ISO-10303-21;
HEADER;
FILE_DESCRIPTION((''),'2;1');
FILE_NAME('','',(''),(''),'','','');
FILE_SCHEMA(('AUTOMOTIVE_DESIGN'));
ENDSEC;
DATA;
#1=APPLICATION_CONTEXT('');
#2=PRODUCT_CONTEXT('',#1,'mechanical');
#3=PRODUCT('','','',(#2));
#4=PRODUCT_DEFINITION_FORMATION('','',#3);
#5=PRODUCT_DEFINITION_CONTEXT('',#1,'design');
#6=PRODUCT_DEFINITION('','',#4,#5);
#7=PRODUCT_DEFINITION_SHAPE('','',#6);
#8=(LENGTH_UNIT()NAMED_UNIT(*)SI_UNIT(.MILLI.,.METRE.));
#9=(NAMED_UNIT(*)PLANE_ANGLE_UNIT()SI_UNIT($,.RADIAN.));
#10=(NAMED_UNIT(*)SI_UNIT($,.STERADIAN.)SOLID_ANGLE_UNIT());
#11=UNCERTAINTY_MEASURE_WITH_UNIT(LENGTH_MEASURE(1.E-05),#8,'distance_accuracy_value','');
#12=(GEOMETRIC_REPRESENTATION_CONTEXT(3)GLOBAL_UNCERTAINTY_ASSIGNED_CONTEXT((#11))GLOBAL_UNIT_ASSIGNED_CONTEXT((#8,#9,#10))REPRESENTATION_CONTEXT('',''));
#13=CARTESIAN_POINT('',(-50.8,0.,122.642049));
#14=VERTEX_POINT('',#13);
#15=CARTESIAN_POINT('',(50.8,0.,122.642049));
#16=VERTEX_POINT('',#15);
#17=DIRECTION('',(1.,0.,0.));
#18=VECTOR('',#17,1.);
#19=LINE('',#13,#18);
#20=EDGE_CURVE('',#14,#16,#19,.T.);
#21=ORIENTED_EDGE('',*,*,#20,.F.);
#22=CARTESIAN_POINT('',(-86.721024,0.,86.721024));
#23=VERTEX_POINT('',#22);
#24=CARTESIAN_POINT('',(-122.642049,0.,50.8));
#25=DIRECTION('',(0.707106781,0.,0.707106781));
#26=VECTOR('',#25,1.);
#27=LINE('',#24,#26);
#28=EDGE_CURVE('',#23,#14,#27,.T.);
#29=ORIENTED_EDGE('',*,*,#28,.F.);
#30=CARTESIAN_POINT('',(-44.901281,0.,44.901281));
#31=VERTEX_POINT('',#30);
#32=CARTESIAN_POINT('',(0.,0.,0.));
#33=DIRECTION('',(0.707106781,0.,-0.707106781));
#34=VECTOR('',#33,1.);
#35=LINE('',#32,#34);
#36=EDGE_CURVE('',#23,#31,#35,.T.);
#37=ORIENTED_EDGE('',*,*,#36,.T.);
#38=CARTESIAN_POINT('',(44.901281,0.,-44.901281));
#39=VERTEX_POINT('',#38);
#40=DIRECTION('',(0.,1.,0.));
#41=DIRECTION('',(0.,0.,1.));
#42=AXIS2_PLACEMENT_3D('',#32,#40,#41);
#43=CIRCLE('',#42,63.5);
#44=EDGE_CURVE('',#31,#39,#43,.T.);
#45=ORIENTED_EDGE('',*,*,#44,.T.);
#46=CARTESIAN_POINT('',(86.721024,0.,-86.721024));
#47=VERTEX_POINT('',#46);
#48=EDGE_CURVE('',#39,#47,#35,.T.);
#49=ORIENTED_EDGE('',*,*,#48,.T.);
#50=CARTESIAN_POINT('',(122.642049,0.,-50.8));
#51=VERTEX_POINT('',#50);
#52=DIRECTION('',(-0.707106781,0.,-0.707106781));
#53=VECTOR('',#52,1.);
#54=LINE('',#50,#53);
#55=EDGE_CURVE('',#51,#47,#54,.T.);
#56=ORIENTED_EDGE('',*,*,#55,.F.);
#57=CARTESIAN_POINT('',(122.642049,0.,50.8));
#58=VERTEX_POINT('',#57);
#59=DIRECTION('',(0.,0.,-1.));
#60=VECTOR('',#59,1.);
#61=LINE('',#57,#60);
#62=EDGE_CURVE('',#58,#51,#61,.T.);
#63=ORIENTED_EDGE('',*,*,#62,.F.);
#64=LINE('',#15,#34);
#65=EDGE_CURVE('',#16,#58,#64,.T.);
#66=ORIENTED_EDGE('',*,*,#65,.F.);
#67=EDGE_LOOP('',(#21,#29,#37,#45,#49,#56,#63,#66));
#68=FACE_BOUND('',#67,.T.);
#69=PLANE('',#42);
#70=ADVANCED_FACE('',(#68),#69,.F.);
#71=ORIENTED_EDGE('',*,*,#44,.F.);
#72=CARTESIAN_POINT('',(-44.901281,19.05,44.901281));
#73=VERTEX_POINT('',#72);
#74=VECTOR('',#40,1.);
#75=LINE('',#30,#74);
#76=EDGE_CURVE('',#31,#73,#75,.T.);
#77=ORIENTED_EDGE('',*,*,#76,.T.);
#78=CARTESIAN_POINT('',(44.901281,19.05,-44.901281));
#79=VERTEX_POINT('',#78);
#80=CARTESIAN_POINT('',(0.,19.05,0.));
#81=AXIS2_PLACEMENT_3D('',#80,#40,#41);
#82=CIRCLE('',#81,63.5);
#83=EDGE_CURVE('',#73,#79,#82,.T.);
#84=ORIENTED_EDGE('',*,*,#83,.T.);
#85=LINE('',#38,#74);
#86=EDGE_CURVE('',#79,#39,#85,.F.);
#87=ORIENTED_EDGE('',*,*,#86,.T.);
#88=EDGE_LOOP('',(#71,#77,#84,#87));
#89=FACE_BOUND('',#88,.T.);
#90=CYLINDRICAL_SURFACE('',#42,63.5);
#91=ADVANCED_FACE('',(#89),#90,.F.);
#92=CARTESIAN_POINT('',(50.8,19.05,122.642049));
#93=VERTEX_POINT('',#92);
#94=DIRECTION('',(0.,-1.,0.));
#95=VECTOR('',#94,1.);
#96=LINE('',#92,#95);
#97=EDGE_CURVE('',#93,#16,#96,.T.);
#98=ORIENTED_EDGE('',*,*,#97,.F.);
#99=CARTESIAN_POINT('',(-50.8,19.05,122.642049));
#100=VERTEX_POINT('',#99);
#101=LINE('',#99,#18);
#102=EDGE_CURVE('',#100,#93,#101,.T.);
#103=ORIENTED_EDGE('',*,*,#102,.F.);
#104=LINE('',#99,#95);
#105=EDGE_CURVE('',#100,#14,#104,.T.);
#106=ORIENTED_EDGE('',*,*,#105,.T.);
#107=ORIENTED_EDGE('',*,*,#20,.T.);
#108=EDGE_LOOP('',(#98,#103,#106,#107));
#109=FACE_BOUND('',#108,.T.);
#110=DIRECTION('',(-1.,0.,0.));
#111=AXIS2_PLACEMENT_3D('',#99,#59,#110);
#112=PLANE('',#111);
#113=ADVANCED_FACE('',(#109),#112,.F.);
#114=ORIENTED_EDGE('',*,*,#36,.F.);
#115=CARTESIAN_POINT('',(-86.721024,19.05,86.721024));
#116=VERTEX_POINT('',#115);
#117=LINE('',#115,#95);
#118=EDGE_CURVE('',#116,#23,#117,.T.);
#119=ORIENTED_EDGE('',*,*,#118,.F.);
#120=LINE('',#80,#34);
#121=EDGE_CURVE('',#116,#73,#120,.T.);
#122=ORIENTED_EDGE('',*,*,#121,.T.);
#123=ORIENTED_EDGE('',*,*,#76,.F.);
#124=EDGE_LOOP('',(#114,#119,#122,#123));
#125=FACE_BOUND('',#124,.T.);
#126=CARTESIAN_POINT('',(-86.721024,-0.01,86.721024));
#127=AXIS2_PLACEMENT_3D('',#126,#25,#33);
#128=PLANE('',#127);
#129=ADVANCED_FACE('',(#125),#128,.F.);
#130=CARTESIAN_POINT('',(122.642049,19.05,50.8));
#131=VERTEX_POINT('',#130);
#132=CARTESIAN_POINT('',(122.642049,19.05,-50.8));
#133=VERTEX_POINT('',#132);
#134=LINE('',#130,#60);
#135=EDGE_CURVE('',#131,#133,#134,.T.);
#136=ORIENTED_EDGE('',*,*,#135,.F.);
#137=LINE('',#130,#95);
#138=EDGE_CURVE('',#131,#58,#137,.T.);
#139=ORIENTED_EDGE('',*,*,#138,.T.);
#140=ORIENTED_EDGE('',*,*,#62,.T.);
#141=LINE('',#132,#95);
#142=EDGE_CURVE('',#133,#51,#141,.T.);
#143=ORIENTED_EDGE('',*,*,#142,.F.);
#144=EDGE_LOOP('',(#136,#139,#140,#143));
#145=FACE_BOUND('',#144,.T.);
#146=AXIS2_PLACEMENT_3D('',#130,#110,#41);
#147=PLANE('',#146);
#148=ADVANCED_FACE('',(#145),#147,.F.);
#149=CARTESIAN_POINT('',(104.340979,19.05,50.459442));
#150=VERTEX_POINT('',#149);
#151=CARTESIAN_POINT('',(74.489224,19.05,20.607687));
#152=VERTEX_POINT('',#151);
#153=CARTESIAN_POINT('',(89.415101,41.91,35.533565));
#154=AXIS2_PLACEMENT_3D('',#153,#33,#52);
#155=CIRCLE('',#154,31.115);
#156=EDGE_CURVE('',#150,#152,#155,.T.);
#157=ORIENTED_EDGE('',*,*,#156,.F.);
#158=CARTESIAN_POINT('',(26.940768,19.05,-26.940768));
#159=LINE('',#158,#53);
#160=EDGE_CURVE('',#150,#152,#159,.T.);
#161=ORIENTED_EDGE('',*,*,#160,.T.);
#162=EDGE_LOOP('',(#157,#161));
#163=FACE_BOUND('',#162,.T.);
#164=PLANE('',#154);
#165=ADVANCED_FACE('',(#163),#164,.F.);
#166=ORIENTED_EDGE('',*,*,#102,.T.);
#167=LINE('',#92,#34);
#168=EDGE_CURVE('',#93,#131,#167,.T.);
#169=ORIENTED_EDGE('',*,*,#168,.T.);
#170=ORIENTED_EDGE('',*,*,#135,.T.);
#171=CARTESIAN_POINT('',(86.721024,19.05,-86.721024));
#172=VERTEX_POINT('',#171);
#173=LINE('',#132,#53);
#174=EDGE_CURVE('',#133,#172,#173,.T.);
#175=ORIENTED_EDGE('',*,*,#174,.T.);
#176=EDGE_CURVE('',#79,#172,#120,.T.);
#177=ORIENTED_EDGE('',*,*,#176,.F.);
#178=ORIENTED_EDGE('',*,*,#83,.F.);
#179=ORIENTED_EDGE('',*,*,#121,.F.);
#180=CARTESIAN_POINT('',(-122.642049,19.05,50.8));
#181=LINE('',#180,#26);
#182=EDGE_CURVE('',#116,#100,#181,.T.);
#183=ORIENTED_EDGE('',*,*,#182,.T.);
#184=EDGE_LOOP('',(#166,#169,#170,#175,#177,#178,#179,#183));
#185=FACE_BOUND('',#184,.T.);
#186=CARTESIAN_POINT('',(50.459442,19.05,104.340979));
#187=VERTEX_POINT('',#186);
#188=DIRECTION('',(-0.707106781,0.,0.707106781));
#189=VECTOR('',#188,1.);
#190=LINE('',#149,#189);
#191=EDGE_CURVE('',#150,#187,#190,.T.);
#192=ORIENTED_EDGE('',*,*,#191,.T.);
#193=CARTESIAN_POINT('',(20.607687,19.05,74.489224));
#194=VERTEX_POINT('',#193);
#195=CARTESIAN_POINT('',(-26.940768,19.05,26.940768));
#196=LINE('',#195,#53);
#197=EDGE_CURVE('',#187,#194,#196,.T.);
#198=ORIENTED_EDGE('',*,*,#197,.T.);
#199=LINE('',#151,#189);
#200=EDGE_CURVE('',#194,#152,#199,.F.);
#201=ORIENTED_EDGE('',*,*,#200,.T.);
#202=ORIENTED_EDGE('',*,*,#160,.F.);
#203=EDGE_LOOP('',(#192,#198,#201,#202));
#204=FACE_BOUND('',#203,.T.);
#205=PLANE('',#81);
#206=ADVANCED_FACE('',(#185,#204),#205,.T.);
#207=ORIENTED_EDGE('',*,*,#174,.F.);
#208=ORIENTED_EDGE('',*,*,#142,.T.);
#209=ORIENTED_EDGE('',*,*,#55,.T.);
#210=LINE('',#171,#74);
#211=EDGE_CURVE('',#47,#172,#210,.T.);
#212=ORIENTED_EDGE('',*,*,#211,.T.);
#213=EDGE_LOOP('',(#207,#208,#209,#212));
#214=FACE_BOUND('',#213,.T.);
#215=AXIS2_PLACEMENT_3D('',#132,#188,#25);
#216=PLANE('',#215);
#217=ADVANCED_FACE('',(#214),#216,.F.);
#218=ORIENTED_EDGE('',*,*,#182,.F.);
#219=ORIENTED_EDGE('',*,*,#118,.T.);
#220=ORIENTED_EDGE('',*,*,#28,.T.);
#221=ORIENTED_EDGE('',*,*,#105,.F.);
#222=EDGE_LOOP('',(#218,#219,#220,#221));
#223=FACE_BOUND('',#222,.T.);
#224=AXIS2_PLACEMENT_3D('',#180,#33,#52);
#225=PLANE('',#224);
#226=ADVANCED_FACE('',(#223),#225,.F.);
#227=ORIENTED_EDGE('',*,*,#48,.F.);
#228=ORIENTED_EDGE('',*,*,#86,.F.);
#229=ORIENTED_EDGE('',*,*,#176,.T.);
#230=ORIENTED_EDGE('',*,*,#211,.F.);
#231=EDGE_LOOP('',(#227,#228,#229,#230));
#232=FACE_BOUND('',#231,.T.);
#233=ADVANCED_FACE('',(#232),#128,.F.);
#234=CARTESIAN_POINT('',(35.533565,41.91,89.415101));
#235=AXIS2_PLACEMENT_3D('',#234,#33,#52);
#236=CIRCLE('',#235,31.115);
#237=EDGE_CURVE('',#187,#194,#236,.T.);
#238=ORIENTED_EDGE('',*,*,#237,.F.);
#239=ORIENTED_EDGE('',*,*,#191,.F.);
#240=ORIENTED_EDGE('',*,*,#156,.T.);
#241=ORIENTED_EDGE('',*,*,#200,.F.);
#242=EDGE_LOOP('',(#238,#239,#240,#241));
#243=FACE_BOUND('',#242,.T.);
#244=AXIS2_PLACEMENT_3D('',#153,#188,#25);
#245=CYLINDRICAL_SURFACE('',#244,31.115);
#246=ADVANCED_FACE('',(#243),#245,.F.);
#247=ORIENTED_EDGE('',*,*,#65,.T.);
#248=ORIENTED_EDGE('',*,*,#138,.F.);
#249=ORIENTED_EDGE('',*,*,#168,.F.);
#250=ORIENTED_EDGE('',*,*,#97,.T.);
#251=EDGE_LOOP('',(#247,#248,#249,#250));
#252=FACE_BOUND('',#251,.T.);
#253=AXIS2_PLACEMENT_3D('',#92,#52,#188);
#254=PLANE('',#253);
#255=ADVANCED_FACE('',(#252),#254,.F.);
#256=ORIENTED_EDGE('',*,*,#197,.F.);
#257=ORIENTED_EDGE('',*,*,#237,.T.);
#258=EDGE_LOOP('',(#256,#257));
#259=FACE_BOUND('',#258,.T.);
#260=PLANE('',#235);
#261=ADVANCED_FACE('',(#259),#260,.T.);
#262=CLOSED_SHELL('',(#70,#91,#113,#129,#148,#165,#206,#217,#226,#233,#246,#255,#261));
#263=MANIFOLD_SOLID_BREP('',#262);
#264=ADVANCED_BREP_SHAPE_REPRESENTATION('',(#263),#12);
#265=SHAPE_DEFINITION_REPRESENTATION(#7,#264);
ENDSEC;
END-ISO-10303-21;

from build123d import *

# Parameters (mm, degrees)
STOCK_A_0101_1_DEPTH    = 19.05
CUT_EXTRUDE1_DEPTH      = 38.1
CUT_EXTRUDE1_DEPTH_BACK = 38.1
SKETCH1_R               = 31.115


# Read off the part's stored shape, not the designer's step: Stock-A-0101-1
with BuildPart() as part:
    # Stock-A-0101-1 outline → Stock-A-0101-1 (new body)
    with BuildSketch(Plane(origin=(0, 0, 0), x_dir=(1, 0, 0), z_dir=(0, 1, 0))):
        with BuildLine():
            Line((86.721024484, 86.721024484), (44.901280605, 44.901280605))
            ThreePointArc((44.901280605, 44.901280605), (44.901280605, -44.901280605), (-44.901280605, -44.901280605))
            Line((-44.901280605, -44.901280605), (-86.721024484, -86.721024484))
            Line((-86.721024484, -86.721024484), (-50.8, -122.642048969))
            Line((-50.8, -122.642048969), (50.8, -122.642048969))
            Line((50.8, -122.642048969), (122.642048969, -50.8))
            Line((122.642048969, -50.8), (122.642048969, 50.8))
            Line((122.642048969, 50.8), (86.721024484, 86.721024484))
        make_face()
    extrude(amount=STOCK_A_0101_1_DEPTH)

    # Sketch1 → Cut-Extrude1 (cut, two sides: drawn at the far end of the back side and taken through both)
    with BuildSketch(Plane(origin=(0, 0, 0), x_dir=(-0.7071067811865475, 0, -0.7071067811865477), z_dir=(0.7071067811865477, 0, -0.7071067811865475)).offset(-CUT_EXTRUDE1_DEPTH_BACK)):
        with Locations((-88.352048969, 41.91)):
            Circle(SKETCH1_R)
    extrude(amount=CUT_EXTRUDE1_DEPTH + CUT_EXTRUDE1_DEPTH_BACK, mode=Mode.SUBTRACT)


solid = part.part
